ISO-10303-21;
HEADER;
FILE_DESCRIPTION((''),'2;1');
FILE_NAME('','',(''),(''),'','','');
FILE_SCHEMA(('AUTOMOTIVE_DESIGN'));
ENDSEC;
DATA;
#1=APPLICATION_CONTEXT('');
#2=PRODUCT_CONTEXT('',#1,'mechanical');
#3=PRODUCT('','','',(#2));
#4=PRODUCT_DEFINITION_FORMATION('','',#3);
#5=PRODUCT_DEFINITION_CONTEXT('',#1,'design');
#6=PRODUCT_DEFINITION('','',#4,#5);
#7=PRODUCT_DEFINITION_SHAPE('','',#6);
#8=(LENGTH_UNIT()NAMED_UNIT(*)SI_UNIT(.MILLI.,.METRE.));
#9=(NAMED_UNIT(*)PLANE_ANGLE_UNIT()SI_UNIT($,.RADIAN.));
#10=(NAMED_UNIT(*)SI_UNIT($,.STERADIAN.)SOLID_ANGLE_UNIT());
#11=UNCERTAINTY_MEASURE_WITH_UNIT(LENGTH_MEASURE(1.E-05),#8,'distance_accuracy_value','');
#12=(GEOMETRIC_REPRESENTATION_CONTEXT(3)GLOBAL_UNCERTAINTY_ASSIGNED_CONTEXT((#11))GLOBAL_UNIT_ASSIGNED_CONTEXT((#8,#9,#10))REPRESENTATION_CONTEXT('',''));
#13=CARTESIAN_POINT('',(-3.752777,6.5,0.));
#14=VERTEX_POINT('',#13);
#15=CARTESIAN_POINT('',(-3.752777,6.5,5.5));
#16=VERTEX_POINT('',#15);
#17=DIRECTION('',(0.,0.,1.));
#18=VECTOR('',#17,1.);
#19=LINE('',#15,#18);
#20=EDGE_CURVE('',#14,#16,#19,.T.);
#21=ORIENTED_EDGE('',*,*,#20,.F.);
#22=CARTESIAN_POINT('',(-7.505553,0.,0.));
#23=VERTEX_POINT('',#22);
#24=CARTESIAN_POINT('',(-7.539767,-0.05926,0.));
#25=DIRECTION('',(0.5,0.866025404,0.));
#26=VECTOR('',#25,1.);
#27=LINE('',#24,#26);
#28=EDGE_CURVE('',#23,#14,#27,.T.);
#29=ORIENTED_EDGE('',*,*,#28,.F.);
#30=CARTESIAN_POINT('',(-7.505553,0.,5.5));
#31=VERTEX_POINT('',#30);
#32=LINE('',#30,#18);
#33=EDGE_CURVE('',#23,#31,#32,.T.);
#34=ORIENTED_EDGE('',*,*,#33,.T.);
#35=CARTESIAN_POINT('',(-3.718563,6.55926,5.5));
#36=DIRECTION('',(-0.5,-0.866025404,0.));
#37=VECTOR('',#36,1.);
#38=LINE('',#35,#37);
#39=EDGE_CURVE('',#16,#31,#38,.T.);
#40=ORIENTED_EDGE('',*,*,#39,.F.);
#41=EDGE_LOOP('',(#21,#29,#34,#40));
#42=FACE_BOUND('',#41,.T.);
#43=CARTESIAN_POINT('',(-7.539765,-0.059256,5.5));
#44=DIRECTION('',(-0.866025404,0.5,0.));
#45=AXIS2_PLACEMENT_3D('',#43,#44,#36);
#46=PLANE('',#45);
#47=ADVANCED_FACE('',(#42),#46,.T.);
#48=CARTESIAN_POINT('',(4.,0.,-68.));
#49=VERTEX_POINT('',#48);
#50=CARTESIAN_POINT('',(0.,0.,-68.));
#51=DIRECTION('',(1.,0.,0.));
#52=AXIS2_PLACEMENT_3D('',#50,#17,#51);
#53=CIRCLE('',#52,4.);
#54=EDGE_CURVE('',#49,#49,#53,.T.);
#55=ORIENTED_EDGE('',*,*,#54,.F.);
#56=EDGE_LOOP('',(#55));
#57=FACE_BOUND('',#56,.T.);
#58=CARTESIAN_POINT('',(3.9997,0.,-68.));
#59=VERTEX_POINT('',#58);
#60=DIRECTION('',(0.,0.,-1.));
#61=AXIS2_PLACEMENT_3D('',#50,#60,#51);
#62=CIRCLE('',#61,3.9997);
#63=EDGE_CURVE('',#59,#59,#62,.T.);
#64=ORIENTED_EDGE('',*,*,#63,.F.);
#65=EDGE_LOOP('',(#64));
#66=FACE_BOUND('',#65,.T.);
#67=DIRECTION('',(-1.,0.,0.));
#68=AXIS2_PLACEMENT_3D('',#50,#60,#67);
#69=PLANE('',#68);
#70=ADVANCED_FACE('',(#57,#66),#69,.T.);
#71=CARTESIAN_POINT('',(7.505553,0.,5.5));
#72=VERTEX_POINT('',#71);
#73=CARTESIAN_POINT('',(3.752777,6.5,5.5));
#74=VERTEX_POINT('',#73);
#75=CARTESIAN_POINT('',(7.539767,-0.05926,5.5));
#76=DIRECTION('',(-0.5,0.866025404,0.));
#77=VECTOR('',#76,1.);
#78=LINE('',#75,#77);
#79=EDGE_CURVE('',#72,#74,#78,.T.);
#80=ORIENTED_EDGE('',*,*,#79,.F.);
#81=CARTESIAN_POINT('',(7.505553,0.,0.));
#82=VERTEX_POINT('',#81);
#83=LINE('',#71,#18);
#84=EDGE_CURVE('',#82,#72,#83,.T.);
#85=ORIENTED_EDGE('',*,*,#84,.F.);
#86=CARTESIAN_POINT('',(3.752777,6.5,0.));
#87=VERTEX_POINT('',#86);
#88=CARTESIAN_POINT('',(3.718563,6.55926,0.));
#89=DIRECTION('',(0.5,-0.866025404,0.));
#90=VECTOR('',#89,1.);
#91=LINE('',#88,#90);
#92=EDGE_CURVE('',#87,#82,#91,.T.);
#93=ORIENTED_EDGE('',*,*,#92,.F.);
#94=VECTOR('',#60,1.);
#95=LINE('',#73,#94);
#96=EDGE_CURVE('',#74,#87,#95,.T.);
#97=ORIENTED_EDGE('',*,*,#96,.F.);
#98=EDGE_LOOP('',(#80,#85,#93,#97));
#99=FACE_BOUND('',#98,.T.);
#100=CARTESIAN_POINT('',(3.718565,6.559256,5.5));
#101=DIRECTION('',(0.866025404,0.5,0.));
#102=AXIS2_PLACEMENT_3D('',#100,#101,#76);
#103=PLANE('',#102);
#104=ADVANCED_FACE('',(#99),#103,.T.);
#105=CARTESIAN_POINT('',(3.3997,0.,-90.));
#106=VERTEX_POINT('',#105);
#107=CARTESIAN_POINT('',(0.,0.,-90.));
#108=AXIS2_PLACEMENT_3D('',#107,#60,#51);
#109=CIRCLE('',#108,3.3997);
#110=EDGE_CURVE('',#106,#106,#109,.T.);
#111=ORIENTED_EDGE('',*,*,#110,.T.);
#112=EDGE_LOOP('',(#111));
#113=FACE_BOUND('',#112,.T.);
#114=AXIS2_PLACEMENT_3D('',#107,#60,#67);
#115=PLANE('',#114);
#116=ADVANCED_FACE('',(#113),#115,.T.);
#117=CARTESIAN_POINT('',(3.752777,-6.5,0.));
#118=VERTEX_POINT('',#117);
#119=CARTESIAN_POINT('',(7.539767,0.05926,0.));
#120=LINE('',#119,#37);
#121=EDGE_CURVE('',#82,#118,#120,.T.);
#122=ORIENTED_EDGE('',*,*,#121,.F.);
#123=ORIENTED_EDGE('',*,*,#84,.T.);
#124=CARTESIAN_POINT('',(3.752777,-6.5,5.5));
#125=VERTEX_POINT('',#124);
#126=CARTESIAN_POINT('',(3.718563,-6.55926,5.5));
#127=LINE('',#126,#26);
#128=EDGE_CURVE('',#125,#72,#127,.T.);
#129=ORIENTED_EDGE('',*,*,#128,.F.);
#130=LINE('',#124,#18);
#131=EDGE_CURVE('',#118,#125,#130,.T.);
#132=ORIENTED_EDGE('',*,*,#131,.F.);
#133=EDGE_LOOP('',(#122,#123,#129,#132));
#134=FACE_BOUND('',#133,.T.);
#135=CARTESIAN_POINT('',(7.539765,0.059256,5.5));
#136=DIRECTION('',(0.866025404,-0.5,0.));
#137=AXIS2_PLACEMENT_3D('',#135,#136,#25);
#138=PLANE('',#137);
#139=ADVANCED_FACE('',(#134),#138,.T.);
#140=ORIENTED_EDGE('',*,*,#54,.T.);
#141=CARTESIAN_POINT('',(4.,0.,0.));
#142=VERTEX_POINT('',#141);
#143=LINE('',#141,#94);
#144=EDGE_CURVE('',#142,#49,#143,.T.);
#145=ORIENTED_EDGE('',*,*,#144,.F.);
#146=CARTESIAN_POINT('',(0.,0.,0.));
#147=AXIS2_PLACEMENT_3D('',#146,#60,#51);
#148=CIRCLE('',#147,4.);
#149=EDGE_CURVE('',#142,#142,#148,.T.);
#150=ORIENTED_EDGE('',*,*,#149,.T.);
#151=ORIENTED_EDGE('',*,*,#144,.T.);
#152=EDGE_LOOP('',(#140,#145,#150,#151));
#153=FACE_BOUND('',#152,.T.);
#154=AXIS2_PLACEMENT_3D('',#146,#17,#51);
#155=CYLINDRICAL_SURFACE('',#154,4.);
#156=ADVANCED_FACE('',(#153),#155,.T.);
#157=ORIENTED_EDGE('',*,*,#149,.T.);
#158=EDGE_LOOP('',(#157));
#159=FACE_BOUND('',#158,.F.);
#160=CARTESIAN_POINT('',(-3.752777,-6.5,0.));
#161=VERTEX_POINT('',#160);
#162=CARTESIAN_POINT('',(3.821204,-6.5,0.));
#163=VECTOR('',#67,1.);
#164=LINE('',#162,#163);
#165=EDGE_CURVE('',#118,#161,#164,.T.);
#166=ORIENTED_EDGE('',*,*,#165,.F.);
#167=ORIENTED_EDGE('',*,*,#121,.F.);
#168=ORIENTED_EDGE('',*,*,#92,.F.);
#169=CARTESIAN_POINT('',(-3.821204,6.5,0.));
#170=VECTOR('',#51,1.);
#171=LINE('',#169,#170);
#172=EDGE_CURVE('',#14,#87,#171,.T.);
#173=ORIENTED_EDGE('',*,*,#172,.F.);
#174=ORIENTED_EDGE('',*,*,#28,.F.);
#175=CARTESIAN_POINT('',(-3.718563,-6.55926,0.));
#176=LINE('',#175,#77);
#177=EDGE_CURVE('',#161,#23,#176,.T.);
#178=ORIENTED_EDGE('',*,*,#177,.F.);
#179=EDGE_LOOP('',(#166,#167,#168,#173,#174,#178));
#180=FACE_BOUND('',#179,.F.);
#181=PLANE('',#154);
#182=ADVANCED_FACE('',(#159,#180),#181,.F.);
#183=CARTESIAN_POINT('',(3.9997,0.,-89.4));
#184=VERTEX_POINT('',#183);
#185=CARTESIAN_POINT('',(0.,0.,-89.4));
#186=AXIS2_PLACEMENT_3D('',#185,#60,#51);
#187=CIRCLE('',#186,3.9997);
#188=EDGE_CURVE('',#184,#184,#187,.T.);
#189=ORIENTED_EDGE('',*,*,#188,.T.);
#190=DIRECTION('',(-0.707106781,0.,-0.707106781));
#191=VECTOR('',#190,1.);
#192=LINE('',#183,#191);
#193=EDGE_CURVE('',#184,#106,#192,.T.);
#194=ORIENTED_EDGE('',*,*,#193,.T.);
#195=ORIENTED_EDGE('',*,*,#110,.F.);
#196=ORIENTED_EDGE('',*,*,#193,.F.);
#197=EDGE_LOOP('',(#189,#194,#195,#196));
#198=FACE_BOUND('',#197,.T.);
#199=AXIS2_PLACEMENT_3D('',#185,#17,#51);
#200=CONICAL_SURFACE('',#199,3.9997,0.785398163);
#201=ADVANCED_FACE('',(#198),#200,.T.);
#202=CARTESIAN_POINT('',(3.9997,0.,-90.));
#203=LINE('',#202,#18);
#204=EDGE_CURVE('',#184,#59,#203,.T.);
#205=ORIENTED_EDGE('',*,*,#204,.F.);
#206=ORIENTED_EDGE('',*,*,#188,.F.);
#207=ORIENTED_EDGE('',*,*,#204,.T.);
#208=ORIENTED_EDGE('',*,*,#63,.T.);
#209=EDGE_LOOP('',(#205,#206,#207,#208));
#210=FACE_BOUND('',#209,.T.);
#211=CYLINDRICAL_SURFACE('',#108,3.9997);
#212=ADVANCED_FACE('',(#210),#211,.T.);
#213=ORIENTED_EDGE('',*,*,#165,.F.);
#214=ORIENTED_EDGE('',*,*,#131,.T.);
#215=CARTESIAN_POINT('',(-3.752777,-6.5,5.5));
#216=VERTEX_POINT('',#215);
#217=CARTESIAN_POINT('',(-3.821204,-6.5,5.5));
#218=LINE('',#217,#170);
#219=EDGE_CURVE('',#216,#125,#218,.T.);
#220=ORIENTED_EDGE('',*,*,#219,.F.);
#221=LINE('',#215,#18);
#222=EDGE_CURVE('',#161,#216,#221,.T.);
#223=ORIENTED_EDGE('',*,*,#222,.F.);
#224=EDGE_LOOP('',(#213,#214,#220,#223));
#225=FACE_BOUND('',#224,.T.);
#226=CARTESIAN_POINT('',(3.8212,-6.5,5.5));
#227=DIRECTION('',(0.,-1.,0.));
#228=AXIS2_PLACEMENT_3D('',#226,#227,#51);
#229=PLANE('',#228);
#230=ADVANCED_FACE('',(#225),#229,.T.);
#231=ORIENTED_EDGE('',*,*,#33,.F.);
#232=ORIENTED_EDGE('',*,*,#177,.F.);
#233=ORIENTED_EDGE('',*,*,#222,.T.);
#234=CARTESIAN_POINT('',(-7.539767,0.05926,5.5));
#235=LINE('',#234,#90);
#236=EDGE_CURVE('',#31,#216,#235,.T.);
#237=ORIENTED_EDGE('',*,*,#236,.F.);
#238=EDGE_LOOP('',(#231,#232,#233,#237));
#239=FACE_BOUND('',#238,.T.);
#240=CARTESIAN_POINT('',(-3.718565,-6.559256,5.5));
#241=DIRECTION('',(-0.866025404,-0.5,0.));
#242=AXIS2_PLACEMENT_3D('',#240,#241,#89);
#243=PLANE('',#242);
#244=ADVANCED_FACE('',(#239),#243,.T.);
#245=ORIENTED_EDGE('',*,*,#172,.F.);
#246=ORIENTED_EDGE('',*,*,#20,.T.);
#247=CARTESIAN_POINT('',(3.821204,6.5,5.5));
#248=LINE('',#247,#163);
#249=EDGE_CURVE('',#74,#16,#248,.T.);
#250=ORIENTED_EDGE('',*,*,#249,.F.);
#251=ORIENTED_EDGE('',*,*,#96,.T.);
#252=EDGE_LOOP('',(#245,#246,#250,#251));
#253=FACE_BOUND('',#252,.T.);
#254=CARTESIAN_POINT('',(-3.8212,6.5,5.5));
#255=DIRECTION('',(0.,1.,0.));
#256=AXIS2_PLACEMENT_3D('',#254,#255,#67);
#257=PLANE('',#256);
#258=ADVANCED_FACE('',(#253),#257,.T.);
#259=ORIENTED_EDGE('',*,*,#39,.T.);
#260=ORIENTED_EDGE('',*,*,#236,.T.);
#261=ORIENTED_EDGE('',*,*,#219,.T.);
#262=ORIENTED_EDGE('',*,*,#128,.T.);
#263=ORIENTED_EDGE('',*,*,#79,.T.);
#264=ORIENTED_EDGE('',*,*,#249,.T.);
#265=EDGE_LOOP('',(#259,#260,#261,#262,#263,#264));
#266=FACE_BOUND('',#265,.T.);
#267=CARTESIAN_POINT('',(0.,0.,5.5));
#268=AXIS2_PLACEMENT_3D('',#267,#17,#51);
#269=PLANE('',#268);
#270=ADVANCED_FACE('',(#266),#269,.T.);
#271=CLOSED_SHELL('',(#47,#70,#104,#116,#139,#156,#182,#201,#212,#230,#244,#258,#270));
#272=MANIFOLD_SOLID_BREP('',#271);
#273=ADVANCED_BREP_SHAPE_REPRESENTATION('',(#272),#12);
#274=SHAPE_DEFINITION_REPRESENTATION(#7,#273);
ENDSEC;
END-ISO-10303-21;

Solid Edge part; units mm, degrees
sketch "Sketch1" plane through (0, 0, 0) normal (0, 0, 1) x (1, 0, 0)
  circle A0 centre (0, 0) radius 7.54
  dimension "D1" = 15.08
extrude "Protrusion1" add sketch "Sketch1" along normal blind 5.5
sketch "Sketch2" plane through (0, 0, 0) normal (0, 0, -1) x (1, 0, 0)
  circle A0 centre (0, 0) radius 4
extrude "Protrusion2" add sketch "Sketch2" along normal blind 90
sketch "Sketch3" plane through (0, 0, -90) normal (0, 0, -1) x (1, 0, 0)
  circle A0 centre (0, 0) radius 3.9997
extrude "Cutout1" cut sketch "Sketch3" against normal blind 22 flip side to cut
chamfer "Chamfer_1" distance 0.6 angle 45 1 edges at (-3.9997, 0, -90)
sketch "Sketch4" plane through (0, 0, 5.5) normal (0, 0, 1) x (1, 0, 0)
  line L0 (-3.8212, 6.5) -> (3.8212, 6.5)
  dimension "D1" = 13
extrude "Cutout2" cut sketch "Sketch4" against normal up to next material side at (0, 6.55, 5.5)
pattern_circular "Pattern1" count 6 over 360 about axis through (0, 0, 5.5) along (0, 0, 1) of "Cutout2"
properties part number "24104716"
